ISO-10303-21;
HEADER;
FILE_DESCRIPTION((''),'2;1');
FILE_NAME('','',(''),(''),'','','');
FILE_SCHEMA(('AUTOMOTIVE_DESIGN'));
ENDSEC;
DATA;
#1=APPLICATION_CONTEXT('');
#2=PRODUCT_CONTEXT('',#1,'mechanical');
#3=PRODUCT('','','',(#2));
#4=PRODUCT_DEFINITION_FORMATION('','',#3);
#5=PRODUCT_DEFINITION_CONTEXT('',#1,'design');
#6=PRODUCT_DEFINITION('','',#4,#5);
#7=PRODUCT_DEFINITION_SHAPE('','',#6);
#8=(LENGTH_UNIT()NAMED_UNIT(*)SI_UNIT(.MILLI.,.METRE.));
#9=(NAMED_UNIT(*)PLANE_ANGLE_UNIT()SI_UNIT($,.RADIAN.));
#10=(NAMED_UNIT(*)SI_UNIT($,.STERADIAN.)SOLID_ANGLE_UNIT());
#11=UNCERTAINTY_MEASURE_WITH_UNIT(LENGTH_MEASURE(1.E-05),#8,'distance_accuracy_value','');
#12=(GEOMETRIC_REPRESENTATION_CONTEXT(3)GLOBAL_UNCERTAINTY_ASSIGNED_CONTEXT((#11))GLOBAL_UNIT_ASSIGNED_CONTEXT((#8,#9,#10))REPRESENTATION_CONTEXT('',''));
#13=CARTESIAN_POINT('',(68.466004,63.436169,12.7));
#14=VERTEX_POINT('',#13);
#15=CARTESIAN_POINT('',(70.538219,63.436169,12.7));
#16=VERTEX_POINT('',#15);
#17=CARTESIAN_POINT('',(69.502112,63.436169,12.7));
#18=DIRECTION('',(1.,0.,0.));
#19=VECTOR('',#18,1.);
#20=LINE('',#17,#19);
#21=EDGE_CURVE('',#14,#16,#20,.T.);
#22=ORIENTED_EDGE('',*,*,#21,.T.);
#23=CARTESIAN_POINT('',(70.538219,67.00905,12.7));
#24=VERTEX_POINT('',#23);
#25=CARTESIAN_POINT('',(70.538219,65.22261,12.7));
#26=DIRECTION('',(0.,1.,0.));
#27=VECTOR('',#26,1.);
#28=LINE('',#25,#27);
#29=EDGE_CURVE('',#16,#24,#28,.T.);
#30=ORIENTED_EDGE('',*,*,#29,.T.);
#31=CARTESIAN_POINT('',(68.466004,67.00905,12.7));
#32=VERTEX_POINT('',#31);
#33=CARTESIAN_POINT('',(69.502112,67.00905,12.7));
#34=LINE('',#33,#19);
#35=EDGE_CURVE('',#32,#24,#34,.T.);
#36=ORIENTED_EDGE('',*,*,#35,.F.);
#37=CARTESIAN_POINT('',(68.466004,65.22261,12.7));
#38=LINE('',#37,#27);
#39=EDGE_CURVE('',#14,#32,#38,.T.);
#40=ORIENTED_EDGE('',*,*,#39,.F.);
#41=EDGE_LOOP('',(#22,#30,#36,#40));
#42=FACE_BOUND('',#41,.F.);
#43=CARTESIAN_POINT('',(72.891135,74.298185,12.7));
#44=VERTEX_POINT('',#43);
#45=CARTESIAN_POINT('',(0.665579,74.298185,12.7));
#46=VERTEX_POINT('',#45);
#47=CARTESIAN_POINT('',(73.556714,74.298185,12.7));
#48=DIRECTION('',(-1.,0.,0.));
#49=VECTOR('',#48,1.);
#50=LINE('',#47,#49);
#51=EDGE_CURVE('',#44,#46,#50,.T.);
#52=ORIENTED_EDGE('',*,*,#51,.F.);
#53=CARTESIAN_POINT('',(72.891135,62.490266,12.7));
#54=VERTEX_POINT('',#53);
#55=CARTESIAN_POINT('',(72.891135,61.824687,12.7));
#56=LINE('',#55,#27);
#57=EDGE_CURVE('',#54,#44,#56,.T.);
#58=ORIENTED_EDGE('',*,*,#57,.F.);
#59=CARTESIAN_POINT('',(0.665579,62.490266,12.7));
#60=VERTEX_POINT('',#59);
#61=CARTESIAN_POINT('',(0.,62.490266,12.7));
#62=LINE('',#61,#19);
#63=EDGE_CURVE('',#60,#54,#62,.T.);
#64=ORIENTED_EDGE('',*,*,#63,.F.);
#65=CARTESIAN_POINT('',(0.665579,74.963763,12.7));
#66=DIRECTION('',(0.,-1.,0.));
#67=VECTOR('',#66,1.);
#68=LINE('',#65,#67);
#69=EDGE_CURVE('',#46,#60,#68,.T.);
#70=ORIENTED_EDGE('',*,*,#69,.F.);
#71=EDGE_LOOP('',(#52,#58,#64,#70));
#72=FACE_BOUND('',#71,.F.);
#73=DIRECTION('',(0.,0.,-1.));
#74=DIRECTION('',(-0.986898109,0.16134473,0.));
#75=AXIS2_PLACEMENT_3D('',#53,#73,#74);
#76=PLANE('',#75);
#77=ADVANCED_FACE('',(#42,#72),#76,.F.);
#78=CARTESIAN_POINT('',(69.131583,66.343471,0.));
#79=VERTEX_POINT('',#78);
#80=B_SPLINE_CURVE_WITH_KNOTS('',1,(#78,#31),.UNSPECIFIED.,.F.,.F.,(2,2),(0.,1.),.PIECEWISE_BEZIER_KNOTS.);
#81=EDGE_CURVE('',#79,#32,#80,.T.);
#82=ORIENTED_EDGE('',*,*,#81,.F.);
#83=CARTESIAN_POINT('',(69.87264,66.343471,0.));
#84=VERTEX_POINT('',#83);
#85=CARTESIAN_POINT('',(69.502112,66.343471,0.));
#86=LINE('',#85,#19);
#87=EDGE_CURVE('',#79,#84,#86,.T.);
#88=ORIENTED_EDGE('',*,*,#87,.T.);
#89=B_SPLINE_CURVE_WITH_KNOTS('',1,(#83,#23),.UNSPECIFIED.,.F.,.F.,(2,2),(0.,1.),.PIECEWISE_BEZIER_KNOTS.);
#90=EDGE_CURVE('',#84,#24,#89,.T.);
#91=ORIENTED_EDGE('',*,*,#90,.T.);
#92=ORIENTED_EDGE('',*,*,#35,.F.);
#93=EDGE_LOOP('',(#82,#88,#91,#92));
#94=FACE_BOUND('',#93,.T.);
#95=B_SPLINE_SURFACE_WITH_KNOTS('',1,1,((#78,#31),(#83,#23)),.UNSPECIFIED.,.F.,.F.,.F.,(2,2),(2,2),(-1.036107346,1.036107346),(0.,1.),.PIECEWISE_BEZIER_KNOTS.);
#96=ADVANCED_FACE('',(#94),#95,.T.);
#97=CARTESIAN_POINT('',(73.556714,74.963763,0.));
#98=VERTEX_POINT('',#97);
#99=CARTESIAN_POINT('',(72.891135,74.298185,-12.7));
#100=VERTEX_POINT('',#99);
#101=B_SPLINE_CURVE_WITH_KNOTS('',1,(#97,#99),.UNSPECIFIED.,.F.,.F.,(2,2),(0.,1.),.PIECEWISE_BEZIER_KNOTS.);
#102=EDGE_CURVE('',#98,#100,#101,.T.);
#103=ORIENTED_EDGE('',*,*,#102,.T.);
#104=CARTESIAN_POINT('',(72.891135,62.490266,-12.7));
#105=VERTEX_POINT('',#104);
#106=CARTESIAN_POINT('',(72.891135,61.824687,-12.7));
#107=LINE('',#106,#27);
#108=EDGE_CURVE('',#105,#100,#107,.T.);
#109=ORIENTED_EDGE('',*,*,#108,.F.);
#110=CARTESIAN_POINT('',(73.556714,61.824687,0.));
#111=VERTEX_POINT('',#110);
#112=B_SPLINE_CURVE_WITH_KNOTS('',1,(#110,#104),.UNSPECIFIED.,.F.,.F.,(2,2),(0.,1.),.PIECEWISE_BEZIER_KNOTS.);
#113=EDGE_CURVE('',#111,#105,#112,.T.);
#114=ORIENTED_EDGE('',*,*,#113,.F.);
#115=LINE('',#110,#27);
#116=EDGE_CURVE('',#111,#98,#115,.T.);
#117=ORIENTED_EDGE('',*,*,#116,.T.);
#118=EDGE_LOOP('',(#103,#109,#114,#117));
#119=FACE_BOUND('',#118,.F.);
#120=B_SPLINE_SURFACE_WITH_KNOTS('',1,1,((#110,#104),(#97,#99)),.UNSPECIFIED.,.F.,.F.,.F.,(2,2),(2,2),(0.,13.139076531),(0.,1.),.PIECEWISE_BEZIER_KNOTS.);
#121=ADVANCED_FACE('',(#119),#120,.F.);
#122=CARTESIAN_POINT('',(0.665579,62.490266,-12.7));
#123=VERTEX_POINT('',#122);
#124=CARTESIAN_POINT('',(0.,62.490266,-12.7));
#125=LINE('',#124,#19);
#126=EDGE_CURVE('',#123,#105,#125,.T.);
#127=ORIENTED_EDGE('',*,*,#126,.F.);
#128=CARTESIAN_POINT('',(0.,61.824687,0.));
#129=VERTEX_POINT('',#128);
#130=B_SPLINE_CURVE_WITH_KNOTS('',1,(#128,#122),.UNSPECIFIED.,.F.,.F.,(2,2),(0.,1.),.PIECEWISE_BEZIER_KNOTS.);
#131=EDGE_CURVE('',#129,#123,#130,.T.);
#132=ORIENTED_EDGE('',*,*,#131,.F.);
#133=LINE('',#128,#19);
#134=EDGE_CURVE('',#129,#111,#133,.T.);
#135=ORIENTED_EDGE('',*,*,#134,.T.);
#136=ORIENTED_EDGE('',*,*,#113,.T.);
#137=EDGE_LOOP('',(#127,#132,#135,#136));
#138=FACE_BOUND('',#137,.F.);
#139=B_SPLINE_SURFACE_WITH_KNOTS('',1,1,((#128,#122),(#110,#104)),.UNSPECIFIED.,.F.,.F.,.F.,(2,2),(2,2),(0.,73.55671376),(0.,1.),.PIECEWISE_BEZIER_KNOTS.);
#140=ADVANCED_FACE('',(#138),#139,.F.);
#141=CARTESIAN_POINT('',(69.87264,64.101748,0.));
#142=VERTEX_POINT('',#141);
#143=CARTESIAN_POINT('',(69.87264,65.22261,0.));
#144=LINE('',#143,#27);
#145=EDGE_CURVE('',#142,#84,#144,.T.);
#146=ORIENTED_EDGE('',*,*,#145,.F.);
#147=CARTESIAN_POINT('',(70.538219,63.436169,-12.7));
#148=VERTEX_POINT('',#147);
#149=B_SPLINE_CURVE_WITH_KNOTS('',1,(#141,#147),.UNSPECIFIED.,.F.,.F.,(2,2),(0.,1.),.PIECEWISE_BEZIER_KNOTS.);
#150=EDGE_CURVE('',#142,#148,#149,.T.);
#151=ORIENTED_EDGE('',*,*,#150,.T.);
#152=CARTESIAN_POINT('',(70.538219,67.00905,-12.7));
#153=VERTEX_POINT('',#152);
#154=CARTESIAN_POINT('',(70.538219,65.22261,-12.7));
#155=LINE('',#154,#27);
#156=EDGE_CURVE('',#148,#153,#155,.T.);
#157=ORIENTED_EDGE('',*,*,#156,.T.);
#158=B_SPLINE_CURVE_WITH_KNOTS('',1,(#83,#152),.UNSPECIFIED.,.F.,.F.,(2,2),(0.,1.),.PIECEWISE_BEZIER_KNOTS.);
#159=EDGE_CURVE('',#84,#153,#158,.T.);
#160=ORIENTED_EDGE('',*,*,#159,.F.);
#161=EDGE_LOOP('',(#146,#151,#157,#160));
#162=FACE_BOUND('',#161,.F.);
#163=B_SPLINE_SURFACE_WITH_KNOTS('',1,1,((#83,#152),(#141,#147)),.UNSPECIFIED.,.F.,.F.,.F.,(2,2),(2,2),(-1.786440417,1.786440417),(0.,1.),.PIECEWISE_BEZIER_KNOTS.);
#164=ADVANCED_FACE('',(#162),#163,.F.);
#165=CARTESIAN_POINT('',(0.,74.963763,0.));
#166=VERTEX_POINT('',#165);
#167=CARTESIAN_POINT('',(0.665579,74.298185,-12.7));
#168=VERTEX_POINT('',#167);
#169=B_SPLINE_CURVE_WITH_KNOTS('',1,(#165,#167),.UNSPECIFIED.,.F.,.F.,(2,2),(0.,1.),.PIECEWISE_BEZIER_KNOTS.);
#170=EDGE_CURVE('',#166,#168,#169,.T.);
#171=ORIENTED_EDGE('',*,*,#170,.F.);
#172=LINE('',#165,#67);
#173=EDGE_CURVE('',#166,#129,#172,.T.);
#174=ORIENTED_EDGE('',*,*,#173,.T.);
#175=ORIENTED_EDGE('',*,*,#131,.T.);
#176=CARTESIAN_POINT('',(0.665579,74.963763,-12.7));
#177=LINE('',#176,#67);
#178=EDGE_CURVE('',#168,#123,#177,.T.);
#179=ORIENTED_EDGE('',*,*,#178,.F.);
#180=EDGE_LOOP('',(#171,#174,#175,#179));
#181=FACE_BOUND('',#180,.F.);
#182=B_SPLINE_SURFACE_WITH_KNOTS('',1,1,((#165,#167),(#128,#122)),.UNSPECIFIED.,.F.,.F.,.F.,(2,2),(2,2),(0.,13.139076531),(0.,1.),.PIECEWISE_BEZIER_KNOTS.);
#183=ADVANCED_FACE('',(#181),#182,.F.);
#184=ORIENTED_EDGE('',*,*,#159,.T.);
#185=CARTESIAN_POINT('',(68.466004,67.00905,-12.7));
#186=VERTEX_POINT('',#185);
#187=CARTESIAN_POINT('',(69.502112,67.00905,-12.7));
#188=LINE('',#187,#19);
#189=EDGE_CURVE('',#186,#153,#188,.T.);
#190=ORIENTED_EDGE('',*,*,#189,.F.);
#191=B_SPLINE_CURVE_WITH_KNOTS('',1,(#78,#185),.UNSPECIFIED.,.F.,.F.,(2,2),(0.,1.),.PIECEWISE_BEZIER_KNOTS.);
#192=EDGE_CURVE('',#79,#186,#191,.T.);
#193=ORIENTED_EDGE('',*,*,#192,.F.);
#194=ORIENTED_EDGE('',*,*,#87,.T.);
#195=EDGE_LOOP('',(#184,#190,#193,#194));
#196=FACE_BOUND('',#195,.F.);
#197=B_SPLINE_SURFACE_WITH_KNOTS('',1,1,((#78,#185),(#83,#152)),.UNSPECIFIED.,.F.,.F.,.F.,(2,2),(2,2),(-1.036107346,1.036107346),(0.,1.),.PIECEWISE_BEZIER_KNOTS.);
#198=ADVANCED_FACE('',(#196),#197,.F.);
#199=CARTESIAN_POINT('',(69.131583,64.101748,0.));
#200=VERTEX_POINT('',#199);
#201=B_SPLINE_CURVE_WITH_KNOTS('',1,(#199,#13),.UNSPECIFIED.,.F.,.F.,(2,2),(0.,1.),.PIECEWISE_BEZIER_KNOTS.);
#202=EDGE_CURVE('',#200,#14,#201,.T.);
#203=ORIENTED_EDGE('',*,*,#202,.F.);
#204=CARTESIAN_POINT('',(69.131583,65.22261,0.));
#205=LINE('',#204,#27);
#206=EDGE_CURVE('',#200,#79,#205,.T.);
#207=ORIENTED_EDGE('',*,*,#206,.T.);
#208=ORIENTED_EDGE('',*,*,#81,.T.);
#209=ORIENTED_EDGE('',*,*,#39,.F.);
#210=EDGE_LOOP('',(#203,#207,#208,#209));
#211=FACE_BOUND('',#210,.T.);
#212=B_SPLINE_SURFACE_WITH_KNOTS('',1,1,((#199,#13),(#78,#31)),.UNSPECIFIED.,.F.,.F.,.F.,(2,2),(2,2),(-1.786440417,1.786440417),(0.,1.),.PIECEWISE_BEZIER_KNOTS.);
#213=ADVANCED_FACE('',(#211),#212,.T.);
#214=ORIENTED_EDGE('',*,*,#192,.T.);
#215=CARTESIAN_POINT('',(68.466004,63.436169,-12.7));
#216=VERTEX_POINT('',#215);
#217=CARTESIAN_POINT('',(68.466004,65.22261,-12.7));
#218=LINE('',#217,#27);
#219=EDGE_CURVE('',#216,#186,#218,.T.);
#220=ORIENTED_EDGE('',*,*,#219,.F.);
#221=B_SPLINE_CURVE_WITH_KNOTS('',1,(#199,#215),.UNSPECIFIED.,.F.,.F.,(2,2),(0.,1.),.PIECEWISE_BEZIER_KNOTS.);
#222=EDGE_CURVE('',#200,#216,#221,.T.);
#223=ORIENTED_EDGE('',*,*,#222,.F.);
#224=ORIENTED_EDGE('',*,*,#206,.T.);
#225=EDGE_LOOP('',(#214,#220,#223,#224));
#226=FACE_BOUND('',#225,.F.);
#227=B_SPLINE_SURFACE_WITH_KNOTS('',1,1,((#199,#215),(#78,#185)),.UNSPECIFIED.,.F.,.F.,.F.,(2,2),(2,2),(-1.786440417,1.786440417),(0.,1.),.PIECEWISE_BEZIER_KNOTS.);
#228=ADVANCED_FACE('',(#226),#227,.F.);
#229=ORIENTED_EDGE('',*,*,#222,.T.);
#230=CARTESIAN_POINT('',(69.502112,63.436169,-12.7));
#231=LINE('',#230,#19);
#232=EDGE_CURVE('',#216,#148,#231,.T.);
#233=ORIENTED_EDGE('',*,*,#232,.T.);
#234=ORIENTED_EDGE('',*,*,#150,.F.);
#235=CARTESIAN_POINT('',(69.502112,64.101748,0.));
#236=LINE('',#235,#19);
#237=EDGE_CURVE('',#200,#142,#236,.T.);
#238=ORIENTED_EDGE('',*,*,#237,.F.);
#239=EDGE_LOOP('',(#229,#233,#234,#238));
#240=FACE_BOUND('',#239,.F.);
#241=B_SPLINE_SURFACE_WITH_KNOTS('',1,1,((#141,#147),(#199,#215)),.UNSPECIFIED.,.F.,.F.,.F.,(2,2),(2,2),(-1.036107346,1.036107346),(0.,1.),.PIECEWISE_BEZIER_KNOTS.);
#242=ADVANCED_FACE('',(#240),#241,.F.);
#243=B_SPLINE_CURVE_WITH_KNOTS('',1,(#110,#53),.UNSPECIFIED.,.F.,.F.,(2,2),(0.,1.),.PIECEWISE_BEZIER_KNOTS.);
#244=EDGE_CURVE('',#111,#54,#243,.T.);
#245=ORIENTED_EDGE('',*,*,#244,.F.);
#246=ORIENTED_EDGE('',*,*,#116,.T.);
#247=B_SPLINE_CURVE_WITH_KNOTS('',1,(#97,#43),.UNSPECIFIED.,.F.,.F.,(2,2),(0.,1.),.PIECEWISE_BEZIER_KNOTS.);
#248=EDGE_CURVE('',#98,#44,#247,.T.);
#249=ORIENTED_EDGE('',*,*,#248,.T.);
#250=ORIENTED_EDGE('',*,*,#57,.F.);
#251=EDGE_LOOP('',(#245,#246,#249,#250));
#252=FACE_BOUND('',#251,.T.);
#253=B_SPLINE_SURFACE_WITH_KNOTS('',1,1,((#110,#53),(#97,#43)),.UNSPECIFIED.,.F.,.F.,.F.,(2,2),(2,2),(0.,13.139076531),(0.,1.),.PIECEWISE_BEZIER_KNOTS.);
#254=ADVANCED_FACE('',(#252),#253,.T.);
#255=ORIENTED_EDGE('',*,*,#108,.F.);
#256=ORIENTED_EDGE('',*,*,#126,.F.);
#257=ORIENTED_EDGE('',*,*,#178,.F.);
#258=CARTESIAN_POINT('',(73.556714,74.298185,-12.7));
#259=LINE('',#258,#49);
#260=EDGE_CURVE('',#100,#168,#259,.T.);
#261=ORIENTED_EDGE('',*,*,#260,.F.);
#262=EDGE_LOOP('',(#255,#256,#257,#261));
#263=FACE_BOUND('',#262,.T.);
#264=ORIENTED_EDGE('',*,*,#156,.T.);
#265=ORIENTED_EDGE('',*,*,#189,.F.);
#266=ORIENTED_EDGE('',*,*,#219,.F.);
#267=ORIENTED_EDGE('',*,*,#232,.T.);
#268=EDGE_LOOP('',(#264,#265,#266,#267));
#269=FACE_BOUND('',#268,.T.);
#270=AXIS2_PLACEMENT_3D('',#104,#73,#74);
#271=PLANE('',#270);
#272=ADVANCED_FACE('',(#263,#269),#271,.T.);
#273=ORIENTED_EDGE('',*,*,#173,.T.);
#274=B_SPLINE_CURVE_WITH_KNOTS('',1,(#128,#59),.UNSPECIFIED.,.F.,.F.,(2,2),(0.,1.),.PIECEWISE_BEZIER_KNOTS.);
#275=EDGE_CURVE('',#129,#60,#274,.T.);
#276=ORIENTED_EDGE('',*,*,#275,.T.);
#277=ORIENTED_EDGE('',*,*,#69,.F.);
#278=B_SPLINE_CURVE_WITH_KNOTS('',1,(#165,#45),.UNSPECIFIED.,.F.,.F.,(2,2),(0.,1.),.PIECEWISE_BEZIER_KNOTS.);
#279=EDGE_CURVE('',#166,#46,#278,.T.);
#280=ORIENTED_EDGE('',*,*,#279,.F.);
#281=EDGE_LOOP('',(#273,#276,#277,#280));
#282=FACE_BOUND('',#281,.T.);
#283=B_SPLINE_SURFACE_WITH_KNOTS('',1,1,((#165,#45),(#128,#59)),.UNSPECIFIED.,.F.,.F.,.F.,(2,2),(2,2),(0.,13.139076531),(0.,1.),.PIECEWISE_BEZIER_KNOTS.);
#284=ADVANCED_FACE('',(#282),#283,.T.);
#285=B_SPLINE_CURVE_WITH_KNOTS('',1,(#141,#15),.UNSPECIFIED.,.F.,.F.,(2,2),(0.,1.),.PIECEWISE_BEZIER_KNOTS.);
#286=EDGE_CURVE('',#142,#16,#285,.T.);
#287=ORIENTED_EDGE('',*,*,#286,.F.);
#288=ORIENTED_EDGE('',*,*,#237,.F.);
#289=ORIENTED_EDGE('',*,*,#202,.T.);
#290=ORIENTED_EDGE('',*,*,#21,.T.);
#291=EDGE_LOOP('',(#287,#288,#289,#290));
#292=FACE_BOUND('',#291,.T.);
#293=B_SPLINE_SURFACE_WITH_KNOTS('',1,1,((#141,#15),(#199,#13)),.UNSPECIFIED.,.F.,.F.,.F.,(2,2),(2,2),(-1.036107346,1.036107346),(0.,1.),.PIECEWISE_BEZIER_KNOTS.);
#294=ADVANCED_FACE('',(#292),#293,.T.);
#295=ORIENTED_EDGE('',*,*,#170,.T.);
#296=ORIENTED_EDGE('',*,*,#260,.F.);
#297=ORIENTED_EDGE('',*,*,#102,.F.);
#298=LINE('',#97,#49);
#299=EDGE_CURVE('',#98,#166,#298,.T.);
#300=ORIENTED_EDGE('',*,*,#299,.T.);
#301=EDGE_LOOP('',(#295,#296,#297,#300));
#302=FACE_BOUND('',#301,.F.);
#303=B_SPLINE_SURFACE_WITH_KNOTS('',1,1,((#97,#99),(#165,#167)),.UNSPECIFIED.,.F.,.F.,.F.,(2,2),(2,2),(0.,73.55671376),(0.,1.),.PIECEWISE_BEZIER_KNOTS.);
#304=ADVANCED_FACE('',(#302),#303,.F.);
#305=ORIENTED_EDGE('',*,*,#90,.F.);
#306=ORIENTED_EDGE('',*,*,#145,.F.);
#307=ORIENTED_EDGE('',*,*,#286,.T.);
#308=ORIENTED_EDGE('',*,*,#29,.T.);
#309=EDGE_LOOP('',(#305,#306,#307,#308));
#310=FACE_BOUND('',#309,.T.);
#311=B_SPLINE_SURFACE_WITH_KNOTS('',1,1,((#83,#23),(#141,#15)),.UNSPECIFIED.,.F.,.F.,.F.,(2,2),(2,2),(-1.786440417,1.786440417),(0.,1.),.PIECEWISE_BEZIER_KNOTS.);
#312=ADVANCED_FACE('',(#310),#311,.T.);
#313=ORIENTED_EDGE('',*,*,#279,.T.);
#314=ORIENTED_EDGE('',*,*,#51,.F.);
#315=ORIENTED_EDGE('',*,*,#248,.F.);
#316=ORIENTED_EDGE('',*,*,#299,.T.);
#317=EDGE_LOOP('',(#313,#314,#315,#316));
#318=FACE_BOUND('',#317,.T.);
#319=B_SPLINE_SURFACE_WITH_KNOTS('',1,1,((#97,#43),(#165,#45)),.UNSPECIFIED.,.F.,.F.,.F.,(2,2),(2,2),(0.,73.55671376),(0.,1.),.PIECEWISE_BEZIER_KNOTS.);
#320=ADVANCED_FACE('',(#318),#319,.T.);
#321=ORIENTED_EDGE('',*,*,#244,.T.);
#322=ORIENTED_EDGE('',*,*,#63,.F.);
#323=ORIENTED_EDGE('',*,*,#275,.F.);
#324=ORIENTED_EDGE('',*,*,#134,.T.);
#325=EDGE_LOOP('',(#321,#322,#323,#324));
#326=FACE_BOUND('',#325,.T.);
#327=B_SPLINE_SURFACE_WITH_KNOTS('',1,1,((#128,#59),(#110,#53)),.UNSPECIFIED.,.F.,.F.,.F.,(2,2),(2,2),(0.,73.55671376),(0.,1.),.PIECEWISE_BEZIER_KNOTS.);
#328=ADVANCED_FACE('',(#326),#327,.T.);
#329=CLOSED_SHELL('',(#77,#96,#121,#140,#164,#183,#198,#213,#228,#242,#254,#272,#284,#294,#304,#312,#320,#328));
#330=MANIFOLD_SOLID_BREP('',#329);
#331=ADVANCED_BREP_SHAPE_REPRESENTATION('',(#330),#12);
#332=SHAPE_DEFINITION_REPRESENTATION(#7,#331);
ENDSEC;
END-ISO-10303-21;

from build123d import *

# Parameters (mm, degrees)
F0_W     = 0.7410570979
F0_H     = 2.2417232394
F1_DEPTH = 12.7
F1_TAPER = 3


with BuildPart() as f1:
    # F0 (on Top) → F1 (new body, symmetric)
    with BuildSketch(Plane.XY):
        Polygon((65.8400952816, 61.8246868253), (73.5567137599, 61.8246868253), (73.5567137599, 74.9637633562), (0, 74.9637633562), (0, 61.8246868253), align=None)
        with Locations((69.5021115243, 65.2226097882)):
            Rectangle(F0_W, F0_H, mode=Mode.SUBTRACT)
    extrude(amount=F1_DEPTH, both=True, taper=F1_TAPER)


solid = f1.part
